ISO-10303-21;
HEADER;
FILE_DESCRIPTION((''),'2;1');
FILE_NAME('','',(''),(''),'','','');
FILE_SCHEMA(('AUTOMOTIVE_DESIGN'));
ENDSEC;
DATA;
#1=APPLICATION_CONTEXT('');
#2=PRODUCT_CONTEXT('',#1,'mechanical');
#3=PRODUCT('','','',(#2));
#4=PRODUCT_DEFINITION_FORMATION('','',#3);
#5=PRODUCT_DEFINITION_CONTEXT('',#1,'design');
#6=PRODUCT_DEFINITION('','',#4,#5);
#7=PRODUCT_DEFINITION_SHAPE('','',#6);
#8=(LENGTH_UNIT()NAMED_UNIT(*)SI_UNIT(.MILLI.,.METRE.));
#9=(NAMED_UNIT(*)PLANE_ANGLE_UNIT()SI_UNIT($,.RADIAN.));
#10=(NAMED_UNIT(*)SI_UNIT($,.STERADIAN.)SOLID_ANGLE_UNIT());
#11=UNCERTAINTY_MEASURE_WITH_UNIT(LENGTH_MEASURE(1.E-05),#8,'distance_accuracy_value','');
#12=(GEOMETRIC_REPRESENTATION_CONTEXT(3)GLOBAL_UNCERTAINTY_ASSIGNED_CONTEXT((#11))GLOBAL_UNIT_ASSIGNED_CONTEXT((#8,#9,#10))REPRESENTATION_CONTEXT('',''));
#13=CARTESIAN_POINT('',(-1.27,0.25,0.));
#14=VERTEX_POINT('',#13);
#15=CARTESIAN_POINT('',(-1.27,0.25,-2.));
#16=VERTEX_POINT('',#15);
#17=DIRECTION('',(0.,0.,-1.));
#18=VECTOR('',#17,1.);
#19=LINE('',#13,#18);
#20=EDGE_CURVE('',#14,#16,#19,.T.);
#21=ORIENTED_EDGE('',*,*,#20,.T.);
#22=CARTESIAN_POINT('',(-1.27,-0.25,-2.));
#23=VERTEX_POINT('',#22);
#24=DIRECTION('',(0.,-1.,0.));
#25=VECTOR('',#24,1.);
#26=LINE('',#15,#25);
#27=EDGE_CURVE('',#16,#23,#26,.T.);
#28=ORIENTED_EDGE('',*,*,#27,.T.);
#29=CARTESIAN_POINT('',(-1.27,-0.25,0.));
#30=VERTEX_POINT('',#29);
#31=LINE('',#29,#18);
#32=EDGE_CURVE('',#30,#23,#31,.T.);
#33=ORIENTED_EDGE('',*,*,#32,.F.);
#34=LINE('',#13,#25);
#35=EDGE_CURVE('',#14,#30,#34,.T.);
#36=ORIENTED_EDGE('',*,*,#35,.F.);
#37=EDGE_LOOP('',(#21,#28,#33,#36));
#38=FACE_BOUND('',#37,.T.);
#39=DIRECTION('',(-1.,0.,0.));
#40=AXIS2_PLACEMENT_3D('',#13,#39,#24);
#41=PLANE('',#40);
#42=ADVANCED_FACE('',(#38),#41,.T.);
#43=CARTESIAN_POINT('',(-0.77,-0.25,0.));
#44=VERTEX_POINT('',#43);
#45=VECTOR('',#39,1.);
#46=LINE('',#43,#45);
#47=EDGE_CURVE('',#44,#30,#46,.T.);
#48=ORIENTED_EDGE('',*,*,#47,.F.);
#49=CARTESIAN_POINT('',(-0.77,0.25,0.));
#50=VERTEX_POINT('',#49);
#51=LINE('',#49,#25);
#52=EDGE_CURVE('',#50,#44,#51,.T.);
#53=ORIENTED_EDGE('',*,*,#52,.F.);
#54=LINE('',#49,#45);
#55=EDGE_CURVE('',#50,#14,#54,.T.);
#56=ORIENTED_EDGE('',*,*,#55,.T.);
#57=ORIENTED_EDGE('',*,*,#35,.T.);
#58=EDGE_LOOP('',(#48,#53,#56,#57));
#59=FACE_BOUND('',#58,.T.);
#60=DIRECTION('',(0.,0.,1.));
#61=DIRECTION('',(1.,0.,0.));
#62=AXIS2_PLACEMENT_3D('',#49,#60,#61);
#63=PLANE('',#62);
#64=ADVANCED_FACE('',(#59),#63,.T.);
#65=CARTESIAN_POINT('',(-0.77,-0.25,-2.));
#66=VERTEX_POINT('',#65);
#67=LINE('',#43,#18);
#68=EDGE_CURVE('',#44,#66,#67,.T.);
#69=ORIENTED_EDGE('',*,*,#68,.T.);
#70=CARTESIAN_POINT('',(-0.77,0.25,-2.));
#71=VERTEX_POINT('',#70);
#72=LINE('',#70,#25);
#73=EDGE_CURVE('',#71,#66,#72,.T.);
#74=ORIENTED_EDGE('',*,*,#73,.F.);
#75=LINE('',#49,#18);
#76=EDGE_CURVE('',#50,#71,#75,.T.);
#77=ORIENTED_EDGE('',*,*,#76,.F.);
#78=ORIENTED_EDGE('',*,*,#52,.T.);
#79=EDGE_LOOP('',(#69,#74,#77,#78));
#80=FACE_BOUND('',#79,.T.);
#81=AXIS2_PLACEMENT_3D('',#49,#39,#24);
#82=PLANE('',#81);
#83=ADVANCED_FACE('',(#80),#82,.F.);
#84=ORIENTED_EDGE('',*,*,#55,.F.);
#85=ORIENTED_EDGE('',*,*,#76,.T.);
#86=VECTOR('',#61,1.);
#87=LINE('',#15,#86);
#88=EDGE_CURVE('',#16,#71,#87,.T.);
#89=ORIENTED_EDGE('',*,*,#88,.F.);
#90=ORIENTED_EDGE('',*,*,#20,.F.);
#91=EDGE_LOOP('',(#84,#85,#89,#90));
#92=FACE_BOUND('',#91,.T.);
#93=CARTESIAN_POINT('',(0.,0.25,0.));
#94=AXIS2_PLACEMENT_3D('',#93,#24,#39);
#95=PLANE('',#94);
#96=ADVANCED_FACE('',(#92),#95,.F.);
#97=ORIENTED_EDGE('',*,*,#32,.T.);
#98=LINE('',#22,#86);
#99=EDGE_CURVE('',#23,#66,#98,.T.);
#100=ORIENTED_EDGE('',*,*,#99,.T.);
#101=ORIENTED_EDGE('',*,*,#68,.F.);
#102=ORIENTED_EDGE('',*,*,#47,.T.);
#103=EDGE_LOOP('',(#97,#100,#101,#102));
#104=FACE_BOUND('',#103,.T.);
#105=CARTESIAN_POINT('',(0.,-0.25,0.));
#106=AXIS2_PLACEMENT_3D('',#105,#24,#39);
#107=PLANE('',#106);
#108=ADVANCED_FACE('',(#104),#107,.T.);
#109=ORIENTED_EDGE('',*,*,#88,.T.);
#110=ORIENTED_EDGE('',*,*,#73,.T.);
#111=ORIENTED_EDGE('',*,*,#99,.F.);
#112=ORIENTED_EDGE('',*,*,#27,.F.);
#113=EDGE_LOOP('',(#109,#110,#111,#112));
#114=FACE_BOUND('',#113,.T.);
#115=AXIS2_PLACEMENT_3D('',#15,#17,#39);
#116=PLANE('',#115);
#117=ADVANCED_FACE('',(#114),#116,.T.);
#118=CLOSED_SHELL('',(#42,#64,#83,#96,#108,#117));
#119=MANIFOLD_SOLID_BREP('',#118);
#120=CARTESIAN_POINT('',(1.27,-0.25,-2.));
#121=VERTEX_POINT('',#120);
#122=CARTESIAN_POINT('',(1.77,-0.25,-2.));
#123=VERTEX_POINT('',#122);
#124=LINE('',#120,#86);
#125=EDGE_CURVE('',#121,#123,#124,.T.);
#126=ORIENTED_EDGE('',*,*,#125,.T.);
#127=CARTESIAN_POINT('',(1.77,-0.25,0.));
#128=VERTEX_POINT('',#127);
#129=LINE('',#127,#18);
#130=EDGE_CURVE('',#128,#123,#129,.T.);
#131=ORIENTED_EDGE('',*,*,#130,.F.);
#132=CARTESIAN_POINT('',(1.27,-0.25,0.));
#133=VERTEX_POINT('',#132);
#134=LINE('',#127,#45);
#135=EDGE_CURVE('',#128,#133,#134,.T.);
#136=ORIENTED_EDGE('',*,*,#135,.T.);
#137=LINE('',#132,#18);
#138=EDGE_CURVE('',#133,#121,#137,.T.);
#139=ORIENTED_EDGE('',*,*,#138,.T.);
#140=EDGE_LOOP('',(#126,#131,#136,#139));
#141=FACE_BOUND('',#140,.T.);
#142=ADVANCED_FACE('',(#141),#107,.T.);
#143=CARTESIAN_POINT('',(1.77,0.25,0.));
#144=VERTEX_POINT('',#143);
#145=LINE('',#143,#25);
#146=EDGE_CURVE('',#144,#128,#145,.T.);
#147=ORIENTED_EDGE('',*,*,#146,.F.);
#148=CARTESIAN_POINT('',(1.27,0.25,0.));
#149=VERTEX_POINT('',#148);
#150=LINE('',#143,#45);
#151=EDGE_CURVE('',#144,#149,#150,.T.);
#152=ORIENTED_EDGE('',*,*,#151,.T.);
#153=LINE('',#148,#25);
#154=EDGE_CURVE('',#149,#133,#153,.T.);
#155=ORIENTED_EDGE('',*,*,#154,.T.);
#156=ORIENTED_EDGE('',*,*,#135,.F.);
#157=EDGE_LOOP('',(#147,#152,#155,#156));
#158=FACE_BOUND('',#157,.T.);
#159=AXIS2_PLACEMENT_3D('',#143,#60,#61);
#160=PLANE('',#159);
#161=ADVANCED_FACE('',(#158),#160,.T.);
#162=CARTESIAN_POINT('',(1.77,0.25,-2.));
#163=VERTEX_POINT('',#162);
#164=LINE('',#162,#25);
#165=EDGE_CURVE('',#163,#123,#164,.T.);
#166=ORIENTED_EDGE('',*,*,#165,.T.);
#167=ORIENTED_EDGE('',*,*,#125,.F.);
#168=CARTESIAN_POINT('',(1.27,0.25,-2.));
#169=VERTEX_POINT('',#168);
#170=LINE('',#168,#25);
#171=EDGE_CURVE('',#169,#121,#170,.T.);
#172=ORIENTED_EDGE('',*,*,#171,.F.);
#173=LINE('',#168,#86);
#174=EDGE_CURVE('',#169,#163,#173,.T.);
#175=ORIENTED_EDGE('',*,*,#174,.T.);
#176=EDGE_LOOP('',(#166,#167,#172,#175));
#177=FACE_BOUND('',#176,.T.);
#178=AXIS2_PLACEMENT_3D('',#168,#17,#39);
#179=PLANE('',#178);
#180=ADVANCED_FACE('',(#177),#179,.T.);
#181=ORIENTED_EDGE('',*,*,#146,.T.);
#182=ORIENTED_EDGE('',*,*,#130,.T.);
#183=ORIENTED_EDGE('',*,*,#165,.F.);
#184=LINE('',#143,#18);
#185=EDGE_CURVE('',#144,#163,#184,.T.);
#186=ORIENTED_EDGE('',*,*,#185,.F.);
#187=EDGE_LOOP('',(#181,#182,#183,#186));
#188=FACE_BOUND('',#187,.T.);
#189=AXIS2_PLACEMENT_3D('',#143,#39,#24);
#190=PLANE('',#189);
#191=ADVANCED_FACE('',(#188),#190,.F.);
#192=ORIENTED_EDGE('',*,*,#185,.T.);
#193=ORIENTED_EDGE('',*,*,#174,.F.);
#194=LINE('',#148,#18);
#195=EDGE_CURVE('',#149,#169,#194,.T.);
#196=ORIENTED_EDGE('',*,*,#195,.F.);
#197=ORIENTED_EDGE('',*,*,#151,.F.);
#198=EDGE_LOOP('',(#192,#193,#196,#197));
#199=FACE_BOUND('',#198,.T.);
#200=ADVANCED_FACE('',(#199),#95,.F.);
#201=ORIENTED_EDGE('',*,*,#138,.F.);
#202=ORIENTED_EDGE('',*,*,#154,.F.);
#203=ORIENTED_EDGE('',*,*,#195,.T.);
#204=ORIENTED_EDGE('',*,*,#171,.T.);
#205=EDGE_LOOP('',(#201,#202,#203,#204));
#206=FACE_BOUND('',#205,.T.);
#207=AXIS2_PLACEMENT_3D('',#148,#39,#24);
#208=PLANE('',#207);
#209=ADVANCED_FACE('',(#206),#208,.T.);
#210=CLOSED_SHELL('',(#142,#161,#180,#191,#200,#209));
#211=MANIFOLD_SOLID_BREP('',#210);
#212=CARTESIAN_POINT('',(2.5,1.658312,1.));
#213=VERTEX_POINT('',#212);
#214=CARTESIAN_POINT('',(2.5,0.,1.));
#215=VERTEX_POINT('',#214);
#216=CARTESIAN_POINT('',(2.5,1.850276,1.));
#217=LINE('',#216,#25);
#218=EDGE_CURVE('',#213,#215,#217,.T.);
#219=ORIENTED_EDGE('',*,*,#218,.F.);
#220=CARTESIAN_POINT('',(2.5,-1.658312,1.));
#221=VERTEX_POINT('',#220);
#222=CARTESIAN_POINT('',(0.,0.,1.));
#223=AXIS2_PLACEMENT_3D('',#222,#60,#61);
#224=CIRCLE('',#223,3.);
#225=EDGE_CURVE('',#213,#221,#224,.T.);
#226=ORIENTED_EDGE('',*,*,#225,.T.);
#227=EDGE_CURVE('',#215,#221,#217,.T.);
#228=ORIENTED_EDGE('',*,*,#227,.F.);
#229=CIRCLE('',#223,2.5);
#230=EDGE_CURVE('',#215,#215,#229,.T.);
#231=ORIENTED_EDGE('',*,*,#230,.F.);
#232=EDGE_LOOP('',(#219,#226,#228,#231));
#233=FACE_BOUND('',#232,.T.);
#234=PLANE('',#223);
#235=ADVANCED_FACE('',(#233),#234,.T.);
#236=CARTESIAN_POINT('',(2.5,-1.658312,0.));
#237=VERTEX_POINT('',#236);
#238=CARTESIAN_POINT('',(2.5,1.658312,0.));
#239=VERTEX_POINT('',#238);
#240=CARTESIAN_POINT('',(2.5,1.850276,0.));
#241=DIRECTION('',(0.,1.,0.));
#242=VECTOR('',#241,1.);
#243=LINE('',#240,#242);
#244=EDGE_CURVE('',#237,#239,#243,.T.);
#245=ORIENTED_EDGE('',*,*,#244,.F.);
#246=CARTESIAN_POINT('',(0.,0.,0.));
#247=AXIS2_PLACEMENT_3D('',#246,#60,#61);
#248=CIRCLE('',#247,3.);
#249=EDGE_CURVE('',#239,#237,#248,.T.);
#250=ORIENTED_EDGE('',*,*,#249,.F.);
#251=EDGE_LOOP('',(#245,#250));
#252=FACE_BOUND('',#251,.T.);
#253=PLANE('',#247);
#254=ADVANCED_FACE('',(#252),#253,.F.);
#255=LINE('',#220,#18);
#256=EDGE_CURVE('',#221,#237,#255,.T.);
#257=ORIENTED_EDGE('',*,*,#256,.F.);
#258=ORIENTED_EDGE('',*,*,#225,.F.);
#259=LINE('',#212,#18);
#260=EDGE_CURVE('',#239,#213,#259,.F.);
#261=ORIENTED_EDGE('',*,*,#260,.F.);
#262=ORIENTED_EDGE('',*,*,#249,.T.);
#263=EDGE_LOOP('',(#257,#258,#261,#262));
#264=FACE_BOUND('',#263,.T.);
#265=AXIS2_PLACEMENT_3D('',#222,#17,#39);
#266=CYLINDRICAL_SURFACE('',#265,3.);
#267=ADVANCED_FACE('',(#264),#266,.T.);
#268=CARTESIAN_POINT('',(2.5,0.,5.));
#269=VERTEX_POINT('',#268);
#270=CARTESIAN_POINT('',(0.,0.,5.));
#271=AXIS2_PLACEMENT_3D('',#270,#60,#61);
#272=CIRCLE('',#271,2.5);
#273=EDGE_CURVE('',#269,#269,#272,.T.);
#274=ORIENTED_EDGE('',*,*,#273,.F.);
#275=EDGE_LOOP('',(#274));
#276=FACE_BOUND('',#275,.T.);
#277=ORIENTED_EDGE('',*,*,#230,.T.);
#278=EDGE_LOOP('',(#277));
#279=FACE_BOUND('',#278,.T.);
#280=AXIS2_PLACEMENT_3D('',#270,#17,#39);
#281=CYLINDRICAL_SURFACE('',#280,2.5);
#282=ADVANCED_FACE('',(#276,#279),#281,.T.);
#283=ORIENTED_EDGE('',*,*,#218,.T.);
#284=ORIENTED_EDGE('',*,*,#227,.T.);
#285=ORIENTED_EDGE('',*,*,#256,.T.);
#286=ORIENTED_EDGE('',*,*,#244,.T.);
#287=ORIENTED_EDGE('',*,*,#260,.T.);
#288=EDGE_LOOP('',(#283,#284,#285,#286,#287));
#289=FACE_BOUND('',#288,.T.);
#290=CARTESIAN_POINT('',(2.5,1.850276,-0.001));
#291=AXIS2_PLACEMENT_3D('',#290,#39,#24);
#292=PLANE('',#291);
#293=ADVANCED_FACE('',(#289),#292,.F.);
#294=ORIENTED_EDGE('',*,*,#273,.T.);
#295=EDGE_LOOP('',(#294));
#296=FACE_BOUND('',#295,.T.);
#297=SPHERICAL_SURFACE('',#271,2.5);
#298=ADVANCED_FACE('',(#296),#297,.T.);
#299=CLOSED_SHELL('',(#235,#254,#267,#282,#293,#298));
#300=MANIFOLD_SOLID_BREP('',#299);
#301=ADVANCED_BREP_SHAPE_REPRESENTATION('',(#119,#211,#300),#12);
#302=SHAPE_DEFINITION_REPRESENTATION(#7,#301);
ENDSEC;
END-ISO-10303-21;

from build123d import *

# Parameters (mm, degrees)
SKETCH1_R           = 3
BOSS_EXTRUDE1_DEPTH = 1
SKETCH2_R           = 2.5
BOSS_EXTRUDE2_DEPTH = 4
DOME1_FACE_RADIUS   = 2.5
DOME1_HEIGHT        = 2.5
CUT_EXTRUDE1_REACH  = 9.762
SKETCH3_W           = 0.5
SKETCH3_H           = 4.031292186
SKETCH8_W           = 0.5
SKETCH8_H           = 2
BASE_FLANGE1_DEPTH  = 0.25
SKETCH9_W           = 0.5
SKETCH9_H           = 2
BASE_FLANGE2_DEPTH  = 0.25


# Sheet-metal steps are written as plain solids
with BuildPart() as part:
    # Sketch1 → Boss-Extrude1 (new body)
    with BuildSketch(Plane.XY):
        Circle(SKETCH1_R)
    extrude(amount=BOSS_EXTRUDE1_DEPTH)

    # Sketch2 → Boss-Extrude2 (add)
    with BuildSketch(Plane.XY.offset(1)):
        Circle(SKETCH2_R)
    extrude(amount=BOSS_EXTRUDE2_DEPTH)

    # Dome1: a dome of height H over a round flat face of radius A is a cap of a sphere of radius (A * A + H * H) / (2 * H)
    dome1_r = (DOME1_FACE_RADIUS * DOME1_FACE_RADIUS + DOME1_HEIGHT * DOME1_HEIGHT) / (2 * DOME1_HEIGHT)
    dome1_base = Plane((0, 0, 5), z_dir=(0, 0, 1))
    with Locations(dome1_base.offset(DOME1_HEIGHT - dome1_r)):
        dome1_ball = Sphere(dome1_r, mode=Mode.PRIVATE)
    add(split(dome1_ball, bisect_by=dome1_base, keep=Keep.TOP, mode=Mode.PRIVATE))

    # Sketch3 → Cut-Extrude1 (cut, up to next)
    with BuildSketch(Plane.XY.offset(1), mode=Mode.PRIVATE) as cut_extrude1_sk1:
        with Locations((2.75, -0.165370345)):
            Rectangle(SKETCH3_W, SKETCH3_H)
    cut_extrude1_tool1 = extrude(cut_extrude1_sk1.sketch, amount=-CUT_EXTRUDE1_REACH, mode=Mode.PRIVATE) & part.part
    add(cut_extrude1_tool1.solids().sort_by_distance((2.75, -0.16537, 1))[0], mode=Mode.SUBTRACT)


with BuildPart() as body_2:
    # Sketch8 → Base-Flange1 (new, symmetric)
    with BuildSketch(Plane(origin=(0, 0, 0), x_dir=(1, 0, 0), z_dir=(0, 1, 0))):
        with Locations((-1.02, 1)):
            Rectangle(SKETCH8_W, SKETCH8_H)
    extrude(amount=BASE_FLANGE1_DEPTH, both=True)


with BuildPart() as body_3:
    # Sketch9 → Base-Flange2 (new, symmetric)
    with BuildSketch(Plane(origin=(0, 0, 0), x_dir=(1, 0, 0), z_dir=(0, 1, 0))):
        with Locations((1.52, 1)):
            Rectangle(SKETCH9_W, SKETCH9_H)
    extrude(amount=BASE_FLANGE2_DEPTH, both=True)


solid = Compound([part.part, body_2.part, body_3.part])
